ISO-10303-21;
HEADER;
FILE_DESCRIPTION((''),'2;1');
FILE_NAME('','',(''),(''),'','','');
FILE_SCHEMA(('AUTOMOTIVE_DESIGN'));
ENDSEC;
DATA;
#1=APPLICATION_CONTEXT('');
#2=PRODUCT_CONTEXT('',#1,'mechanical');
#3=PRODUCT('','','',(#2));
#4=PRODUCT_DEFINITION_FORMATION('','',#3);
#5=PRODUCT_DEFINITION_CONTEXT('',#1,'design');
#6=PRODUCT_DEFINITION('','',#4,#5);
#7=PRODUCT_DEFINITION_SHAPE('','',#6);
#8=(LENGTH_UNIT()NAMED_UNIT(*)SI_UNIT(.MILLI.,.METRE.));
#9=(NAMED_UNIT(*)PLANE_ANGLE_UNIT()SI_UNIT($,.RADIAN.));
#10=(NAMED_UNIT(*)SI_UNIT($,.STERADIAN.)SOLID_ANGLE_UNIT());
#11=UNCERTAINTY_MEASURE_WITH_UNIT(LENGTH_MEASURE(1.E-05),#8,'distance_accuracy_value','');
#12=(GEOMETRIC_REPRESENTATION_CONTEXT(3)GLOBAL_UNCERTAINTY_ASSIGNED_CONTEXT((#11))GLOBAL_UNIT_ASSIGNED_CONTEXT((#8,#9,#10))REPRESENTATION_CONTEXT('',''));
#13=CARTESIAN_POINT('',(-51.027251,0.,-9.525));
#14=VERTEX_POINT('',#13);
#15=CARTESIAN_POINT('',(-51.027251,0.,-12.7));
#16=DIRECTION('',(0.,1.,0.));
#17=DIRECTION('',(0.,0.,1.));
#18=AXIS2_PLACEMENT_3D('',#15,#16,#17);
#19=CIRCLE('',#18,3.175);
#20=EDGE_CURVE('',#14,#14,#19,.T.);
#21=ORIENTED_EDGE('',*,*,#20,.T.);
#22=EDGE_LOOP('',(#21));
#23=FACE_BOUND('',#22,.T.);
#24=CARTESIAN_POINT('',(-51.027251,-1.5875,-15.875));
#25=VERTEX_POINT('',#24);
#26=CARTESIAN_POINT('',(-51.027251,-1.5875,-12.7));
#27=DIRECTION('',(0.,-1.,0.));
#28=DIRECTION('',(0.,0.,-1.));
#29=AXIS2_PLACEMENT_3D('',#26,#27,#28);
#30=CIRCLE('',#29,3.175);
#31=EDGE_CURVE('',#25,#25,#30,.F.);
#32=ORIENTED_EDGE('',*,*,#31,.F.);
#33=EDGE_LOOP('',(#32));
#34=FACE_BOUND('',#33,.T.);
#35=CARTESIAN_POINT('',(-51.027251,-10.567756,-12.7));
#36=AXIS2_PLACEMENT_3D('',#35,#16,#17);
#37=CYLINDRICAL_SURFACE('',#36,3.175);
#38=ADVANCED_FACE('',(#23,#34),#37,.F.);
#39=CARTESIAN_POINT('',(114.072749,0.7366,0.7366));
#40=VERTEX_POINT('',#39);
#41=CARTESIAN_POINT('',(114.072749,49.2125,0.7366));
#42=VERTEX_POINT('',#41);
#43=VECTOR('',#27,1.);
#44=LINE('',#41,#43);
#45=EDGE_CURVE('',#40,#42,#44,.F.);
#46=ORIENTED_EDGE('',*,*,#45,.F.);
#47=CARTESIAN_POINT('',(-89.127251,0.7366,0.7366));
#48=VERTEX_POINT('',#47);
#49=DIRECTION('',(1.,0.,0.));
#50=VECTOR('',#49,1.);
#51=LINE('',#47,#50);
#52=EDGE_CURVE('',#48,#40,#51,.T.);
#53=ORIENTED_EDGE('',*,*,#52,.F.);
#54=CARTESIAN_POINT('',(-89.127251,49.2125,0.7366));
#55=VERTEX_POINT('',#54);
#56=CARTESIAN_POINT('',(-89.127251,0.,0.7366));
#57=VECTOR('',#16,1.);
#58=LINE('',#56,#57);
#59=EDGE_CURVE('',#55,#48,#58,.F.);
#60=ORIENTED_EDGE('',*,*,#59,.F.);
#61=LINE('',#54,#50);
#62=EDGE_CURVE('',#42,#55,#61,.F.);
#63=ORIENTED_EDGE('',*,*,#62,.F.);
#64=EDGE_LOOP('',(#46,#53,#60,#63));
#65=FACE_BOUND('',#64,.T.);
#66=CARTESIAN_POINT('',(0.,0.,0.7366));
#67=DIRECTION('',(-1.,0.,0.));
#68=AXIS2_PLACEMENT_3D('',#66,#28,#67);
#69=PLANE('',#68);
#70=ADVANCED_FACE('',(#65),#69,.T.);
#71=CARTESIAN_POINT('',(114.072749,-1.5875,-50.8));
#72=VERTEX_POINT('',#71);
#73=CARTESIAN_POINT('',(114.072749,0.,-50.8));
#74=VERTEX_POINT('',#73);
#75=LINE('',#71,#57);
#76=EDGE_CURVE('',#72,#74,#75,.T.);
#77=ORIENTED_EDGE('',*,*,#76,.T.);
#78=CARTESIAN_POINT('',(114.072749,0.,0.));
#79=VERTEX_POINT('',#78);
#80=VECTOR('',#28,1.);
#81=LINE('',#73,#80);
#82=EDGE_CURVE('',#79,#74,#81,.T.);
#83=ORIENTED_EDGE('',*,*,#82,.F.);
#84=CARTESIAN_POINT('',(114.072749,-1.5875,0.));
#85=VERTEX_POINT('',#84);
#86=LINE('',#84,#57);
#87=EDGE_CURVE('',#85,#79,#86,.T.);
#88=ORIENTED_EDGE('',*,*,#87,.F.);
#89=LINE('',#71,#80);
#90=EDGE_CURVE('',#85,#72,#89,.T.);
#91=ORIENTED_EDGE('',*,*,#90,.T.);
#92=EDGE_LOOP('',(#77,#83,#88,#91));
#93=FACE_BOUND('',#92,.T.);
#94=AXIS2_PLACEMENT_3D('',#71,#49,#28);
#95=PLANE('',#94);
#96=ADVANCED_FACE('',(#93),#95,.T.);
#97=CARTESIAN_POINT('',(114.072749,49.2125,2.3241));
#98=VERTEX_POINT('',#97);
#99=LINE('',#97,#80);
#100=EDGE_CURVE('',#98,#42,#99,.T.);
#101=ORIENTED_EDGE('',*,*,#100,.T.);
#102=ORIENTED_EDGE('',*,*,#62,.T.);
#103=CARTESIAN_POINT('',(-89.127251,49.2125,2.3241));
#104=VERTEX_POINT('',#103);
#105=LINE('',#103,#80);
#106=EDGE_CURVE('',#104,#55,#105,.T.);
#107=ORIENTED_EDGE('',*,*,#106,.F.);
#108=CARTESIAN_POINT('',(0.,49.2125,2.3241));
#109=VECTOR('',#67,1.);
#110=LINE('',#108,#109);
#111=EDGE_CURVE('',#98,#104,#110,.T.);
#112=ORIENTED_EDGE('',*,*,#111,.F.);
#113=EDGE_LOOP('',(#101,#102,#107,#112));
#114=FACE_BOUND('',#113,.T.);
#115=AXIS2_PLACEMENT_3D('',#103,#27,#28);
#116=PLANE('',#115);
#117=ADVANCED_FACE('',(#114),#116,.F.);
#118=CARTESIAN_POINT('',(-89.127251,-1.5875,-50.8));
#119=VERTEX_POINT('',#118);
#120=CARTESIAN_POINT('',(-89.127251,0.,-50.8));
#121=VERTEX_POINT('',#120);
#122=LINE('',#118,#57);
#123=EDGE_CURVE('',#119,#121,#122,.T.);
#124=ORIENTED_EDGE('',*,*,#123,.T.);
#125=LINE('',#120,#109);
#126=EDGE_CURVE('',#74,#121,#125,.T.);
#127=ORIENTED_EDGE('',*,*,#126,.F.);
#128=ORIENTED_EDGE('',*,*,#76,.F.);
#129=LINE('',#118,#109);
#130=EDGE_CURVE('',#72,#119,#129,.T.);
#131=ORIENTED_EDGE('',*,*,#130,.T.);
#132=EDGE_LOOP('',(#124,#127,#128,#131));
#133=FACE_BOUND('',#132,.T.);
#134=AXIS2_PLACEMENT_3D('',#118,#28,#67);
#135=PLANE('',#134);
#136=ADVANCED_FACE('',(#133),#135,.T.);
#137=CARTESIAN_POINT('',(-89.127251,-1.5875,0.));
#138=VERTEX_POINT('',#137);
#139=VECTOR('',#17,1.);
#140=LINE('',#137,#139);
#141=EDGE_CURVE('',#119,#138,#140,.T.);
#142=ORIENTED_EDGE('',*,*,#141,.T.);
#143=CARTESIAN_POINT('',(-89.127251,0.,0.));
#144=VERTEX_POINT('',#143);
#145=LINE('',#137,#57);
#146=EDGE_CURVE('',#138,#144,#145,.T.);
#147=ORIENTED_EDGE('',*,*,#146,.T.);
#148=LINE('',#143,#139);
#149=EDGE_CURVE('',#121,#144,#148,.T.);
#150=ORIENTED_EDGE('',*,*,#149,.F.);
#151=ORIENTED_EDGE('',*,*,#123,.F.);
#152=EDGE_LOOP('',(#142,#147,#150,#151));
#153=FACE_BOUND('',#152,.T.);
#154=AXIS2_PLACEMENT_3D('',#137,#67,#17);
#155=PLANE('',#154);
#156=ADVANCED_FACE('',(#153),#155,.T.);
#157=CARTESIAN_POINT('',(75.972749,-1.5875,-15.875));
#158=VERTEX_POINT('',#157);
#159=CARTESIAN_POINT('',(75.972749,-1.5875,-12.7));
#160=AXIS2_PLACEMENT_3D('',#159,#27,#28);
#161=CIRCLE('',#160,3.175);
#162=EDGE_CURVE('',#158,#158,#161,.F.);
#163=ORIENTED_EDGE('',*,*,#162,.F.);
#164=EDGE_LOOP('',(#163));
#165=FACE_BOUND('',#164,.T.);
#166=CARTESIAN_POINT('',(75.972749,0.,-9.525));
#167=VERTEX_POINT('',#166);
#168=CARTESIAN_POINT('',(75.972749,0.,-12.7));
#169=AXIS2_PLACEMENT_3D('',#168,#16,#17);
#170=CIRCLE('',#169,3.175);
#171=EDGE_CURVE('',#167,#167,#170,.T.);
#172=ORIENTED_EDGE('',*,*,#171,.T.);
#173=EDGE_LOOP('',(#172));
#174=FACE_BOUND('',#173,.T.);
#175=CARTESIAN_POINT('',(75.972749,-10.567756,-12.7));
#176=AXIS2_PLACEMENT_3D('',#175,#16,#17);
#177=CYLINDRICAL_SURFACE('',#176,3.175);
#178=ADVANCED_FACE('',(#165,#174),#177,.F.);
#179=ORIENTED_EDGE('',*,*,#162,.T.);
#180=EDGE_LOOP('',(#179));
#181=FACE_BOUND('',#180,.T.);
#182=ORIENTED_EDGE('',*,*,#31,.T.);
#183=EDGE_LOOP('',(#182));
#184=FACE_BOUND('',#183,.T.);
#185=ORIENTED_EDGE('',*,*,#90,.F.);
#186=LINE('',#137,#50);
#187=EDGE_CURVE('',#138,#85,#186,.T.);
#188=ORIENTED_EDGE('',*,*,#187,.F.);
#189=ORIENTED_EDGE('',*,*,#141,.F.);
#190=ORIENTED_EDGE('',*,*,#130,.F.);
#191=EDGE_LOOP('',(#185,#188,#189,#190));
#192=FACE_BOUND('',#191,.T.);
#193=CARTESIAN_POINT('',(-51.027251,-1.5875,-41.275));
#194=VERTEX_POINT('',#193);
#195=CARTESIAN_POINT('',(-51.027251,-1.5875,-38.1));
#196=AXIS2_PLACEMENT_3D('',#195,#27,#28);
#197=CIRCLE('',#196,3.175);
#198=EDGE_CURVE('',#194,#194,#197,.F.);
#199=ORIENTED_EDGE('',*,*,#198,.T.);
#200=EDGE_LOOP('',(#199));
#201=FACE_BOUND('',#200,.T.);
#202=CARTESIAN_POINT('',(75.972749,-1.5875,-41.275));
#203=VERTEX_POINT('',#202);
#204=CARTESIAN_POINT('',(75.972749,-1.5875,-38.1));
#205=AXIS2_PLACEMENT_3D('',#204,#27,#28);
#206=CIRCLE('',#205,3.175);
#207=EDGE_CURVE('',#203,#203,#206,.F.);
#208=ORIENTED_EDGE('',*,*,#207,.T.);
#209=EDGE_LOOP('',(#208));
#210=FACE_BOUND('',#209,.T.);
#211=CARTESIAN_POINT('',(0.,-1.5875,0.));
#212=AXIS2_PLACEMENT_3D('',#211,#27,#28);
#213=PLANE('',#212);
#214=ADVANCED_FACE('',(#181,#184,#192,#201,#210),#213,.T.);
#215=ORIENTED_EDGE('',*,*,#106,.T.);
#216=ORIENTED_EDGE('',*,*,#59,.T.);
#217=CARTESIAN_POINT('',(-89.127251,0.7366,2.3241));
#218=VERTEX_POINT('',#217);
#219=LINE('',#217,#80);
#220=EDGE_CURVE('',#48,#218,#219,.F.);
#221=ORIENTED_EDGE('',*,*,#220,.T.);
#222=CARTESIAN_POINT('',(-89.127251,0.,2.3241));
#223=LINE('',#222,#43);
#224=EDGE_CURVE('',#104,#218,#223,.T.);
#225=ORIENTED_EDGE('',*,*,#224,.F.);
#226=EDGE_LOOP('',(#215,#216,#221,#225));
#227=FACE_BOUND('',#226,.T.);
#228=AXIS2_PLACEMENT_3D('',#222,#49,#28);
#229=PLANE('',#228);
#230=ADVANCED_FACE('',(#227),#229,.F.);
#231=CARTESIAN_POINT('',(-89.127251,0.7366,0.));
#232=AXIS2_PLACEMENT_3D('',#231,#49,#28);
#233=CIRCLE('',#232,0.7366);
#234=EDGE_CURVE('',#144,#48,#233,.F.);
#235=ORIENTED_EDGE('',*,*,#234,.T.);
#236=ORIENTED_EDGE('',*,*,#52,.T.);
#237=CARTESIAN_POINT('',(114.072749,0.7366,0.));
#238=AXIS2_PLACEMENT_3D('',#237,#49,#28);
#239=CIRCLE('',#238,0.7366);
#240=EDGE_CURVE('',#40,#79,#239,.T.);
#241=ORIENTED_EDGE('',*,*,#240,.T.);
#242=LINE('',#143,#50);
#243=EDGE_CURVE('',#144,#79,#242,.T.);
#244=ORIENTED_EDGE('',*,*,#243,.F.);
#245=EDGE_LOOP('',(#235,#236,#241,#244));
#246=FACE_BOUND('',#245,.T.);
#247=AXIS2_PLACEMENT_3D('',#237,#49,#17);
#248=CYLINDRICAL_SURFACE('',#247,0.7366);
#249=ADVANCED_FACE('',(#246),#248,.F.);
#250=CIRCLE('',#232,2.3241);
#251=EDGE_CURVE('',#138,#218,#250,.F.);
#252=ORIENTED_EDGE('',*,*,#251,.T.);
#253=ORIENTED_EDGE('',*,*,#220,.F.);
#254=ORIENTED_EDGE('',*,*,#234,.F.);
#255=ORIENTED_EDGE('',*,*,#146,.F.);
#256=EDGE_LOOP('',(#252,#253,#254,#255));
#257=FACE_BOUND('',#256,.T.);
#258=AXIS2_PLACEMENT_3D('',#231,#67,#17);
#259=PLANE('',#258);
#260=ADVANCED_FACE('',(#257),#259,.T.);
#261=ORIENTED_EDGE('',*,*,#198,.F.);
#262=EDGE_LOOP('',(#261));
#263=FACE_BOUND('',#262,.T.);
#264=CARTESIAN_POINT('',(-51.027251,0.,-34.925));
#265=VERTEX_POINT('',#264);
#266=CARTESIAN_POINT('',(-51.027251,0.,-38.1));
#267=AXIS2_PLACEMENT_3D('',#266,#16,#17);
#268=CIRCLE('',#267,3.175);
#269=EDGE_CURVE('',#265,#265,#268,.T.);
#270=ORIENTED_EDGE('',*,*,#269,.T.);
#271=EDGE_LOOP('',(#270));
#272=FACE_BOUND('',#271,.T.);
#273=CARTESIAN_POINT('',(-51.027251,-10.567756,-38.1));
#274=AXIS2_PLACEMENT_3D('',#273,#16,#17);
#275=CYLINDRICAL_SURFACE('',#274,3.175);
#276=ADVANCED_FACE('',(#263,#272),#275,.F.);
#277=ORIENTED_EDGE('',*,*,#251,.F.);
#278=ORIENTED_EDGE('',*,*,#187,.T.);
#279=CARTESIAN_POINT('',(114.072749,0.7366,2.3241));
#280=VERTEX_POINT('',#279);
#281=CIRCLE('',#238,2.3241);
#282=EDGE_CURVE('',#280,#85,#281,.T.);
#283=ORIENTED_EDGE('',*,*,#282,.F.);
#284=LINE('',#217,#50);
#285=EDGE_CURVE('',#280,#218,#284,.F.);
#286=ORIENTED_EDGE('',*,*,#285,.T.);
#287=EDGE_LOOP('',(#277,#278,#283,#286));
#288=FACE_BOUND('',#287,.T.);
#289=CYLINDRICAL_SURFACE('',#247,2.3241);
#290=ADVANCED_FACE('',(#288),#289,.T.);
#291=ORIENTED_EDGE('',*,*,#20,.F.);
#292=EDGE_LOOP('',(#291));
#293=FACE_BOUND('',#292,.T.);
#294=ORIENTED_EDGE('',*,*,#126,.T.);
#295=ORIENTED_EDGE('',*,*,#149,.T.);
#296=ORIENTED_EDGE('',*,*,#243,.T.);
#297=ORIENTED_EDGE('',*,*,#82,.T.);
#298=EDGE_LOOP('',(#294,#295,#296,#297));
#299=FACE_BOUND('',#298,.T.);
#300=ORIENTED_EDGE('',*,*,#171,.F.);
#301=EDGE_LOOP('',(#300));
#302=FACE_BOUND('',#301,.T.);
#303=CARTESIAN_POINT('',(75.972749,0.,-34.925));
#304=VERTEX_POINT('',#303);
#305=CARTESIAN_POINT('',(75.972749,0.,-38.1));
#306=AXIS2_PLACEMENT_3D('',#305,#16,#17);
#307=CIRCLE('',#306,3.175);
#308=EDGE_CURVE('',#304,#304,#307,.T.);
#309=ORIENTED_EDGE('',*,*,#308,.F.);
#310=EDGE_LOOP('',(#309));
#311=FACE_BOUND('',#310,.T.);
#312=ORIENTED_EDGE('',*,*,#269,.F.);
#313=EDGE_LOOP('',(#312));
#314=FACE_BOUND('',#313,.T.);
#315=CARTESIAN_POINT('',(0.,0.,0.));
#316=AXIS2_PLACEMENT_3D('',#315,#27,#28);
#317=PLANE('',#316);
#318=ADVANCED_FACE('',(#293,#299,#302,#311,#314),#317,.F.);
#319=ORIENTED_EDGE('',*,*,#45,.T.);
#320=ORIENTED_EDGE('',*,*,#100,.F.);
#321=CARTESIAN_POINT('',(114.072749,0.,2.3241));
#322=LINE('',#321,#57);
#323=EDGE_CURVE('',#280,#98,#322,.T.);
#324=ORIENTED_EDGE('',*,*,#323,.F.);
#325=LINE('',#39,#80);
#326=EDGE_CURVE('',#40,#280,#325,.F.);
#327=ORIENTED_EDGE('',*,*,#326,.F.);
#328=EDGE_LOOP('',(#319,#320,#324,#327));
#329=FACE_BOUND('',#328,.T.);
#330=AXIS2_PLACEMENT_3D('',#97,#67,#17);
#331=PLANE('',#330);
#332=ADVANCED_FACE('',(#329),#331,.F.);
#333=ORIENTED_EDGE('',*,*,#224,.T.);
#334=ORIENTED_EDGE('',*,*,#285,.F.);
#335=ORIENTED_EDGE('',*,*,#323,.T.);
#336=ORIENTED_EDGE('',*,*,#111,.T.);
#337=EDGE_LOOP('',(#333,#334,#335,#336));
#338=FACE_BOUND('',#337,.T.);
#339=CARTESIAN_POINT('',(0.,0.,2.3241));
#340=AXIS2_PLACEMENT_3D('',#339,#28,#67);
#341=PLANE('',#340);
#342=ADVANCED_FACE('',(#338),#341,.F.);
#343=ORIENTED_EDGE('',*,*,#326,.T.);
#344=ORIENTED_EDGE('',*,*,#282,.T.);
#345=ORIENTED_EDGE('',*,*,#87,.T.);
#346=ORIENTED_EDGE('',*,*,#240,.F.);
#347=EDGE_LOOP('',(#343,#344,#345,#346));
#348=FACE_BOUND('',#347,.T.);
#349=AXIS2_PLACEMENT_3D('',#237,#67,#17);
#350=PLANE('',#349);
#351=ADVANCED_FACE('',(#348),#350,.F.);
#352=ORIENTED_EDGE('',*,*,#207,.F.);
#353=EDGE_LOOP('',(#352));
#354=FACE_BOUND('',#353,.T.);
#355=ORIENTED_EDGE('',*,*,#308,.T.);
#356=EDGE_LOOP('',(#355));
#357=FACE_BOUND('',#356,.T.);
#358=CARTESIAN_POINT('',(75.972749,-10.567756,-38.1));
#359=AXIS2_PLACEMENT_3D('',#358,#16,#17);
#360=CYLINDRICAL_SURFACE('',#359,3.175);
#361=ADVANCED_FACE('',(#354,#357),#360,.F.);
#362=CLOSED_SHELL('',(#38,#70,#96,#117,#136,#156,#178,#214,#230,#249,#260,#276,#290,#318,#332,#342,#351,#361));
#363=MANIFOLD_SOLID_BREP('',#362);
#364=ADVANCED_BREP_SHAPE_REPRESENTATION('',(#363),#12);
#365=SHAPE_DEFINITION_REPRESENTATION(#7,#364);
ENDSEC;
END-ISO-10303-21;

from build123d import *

# Parameters (mm, degrees)
SKETCH1_W          = 203.2
SKETCH1_H          = 50.8
BASE_FLANGE1_DEPTH = 1.5875
EDGE_FLANGE3_DEPTH = 203.2
SKETCH15_R         = 3.175
CUT_EXTRUDE1_DEPTH = 1.5875


# Sheet-metal steps are written as plain solids
with BuildPart() as part:
    # Sketch1 → Base-Flange1 (new body)
    with BuildSketch(Plane(origin=(0, 0, 0), x_dir=(1, 0, 0), z_dir=(0, 1, 0))):
        with Locations((12.472748517, 25.4)):
            Rectangle(SKETCH1_W, SKETCH1_H)
    extrude(amount=-BASE_FLANGE1_DEPTH)

    # Edge-Flange3 section (across the edge) → Edge-Flange3 (add)
    with BuildSketch(Plane(origin=(-89.127251483, 0, 0.7366), x_dir=(0, 0, -1), z_dir=(1, 0, 0))):
        with BuildLine():
            Line((-1.5875, 0.7366), (-1.5875, 49.2125))
            Line((-1.5875, 49.2125), (0, 49.2125))
            Line((0, 49.2125), (0, 0.7366))
            ThreePointArc((0, 0.7366), (0.215745145, 0.215745145), (0.7366, 0))
            Line((0.7366, 0), (0.7366, -1.5875))
            ThreePointArc((0.7366, -1.5875), (-0.90678687, -0.90678687), (-1.5875, 0.7366))
        make_face()
    extrude(amount=EDGE_FLANGE3_DEPTH)

    # Sketch15 → Cut-Extrude1 (cut)
    with BuildSketch(Plane(origin=(0, 0, 0), x_dir=(1, 0, 0), z_dir=(0, 1, 0))):
        with Locations(Location((-51.027251483, 38.1, 0), (0, 0, 270))):
            Circle(SKETCH15_R)
        with Locations(Location((75.972748517, 38.1, 0), (0, 0, 270))):
            Circle(SKETCH15_R)
        with Locations(Location((-51.027251483, 12.7, 0), (0, 0, 270))):
            Circle(SKETCH15_R)
        with Locations(Location((75.972748517, 12.7, 0), (0, 0, 270))):
            Circle(SKETCH15_R)
    extrude(amount=-CUT_EXTRUDE1_DEPTH, mode=Mode.SUBTRACT)


solid = part.part
